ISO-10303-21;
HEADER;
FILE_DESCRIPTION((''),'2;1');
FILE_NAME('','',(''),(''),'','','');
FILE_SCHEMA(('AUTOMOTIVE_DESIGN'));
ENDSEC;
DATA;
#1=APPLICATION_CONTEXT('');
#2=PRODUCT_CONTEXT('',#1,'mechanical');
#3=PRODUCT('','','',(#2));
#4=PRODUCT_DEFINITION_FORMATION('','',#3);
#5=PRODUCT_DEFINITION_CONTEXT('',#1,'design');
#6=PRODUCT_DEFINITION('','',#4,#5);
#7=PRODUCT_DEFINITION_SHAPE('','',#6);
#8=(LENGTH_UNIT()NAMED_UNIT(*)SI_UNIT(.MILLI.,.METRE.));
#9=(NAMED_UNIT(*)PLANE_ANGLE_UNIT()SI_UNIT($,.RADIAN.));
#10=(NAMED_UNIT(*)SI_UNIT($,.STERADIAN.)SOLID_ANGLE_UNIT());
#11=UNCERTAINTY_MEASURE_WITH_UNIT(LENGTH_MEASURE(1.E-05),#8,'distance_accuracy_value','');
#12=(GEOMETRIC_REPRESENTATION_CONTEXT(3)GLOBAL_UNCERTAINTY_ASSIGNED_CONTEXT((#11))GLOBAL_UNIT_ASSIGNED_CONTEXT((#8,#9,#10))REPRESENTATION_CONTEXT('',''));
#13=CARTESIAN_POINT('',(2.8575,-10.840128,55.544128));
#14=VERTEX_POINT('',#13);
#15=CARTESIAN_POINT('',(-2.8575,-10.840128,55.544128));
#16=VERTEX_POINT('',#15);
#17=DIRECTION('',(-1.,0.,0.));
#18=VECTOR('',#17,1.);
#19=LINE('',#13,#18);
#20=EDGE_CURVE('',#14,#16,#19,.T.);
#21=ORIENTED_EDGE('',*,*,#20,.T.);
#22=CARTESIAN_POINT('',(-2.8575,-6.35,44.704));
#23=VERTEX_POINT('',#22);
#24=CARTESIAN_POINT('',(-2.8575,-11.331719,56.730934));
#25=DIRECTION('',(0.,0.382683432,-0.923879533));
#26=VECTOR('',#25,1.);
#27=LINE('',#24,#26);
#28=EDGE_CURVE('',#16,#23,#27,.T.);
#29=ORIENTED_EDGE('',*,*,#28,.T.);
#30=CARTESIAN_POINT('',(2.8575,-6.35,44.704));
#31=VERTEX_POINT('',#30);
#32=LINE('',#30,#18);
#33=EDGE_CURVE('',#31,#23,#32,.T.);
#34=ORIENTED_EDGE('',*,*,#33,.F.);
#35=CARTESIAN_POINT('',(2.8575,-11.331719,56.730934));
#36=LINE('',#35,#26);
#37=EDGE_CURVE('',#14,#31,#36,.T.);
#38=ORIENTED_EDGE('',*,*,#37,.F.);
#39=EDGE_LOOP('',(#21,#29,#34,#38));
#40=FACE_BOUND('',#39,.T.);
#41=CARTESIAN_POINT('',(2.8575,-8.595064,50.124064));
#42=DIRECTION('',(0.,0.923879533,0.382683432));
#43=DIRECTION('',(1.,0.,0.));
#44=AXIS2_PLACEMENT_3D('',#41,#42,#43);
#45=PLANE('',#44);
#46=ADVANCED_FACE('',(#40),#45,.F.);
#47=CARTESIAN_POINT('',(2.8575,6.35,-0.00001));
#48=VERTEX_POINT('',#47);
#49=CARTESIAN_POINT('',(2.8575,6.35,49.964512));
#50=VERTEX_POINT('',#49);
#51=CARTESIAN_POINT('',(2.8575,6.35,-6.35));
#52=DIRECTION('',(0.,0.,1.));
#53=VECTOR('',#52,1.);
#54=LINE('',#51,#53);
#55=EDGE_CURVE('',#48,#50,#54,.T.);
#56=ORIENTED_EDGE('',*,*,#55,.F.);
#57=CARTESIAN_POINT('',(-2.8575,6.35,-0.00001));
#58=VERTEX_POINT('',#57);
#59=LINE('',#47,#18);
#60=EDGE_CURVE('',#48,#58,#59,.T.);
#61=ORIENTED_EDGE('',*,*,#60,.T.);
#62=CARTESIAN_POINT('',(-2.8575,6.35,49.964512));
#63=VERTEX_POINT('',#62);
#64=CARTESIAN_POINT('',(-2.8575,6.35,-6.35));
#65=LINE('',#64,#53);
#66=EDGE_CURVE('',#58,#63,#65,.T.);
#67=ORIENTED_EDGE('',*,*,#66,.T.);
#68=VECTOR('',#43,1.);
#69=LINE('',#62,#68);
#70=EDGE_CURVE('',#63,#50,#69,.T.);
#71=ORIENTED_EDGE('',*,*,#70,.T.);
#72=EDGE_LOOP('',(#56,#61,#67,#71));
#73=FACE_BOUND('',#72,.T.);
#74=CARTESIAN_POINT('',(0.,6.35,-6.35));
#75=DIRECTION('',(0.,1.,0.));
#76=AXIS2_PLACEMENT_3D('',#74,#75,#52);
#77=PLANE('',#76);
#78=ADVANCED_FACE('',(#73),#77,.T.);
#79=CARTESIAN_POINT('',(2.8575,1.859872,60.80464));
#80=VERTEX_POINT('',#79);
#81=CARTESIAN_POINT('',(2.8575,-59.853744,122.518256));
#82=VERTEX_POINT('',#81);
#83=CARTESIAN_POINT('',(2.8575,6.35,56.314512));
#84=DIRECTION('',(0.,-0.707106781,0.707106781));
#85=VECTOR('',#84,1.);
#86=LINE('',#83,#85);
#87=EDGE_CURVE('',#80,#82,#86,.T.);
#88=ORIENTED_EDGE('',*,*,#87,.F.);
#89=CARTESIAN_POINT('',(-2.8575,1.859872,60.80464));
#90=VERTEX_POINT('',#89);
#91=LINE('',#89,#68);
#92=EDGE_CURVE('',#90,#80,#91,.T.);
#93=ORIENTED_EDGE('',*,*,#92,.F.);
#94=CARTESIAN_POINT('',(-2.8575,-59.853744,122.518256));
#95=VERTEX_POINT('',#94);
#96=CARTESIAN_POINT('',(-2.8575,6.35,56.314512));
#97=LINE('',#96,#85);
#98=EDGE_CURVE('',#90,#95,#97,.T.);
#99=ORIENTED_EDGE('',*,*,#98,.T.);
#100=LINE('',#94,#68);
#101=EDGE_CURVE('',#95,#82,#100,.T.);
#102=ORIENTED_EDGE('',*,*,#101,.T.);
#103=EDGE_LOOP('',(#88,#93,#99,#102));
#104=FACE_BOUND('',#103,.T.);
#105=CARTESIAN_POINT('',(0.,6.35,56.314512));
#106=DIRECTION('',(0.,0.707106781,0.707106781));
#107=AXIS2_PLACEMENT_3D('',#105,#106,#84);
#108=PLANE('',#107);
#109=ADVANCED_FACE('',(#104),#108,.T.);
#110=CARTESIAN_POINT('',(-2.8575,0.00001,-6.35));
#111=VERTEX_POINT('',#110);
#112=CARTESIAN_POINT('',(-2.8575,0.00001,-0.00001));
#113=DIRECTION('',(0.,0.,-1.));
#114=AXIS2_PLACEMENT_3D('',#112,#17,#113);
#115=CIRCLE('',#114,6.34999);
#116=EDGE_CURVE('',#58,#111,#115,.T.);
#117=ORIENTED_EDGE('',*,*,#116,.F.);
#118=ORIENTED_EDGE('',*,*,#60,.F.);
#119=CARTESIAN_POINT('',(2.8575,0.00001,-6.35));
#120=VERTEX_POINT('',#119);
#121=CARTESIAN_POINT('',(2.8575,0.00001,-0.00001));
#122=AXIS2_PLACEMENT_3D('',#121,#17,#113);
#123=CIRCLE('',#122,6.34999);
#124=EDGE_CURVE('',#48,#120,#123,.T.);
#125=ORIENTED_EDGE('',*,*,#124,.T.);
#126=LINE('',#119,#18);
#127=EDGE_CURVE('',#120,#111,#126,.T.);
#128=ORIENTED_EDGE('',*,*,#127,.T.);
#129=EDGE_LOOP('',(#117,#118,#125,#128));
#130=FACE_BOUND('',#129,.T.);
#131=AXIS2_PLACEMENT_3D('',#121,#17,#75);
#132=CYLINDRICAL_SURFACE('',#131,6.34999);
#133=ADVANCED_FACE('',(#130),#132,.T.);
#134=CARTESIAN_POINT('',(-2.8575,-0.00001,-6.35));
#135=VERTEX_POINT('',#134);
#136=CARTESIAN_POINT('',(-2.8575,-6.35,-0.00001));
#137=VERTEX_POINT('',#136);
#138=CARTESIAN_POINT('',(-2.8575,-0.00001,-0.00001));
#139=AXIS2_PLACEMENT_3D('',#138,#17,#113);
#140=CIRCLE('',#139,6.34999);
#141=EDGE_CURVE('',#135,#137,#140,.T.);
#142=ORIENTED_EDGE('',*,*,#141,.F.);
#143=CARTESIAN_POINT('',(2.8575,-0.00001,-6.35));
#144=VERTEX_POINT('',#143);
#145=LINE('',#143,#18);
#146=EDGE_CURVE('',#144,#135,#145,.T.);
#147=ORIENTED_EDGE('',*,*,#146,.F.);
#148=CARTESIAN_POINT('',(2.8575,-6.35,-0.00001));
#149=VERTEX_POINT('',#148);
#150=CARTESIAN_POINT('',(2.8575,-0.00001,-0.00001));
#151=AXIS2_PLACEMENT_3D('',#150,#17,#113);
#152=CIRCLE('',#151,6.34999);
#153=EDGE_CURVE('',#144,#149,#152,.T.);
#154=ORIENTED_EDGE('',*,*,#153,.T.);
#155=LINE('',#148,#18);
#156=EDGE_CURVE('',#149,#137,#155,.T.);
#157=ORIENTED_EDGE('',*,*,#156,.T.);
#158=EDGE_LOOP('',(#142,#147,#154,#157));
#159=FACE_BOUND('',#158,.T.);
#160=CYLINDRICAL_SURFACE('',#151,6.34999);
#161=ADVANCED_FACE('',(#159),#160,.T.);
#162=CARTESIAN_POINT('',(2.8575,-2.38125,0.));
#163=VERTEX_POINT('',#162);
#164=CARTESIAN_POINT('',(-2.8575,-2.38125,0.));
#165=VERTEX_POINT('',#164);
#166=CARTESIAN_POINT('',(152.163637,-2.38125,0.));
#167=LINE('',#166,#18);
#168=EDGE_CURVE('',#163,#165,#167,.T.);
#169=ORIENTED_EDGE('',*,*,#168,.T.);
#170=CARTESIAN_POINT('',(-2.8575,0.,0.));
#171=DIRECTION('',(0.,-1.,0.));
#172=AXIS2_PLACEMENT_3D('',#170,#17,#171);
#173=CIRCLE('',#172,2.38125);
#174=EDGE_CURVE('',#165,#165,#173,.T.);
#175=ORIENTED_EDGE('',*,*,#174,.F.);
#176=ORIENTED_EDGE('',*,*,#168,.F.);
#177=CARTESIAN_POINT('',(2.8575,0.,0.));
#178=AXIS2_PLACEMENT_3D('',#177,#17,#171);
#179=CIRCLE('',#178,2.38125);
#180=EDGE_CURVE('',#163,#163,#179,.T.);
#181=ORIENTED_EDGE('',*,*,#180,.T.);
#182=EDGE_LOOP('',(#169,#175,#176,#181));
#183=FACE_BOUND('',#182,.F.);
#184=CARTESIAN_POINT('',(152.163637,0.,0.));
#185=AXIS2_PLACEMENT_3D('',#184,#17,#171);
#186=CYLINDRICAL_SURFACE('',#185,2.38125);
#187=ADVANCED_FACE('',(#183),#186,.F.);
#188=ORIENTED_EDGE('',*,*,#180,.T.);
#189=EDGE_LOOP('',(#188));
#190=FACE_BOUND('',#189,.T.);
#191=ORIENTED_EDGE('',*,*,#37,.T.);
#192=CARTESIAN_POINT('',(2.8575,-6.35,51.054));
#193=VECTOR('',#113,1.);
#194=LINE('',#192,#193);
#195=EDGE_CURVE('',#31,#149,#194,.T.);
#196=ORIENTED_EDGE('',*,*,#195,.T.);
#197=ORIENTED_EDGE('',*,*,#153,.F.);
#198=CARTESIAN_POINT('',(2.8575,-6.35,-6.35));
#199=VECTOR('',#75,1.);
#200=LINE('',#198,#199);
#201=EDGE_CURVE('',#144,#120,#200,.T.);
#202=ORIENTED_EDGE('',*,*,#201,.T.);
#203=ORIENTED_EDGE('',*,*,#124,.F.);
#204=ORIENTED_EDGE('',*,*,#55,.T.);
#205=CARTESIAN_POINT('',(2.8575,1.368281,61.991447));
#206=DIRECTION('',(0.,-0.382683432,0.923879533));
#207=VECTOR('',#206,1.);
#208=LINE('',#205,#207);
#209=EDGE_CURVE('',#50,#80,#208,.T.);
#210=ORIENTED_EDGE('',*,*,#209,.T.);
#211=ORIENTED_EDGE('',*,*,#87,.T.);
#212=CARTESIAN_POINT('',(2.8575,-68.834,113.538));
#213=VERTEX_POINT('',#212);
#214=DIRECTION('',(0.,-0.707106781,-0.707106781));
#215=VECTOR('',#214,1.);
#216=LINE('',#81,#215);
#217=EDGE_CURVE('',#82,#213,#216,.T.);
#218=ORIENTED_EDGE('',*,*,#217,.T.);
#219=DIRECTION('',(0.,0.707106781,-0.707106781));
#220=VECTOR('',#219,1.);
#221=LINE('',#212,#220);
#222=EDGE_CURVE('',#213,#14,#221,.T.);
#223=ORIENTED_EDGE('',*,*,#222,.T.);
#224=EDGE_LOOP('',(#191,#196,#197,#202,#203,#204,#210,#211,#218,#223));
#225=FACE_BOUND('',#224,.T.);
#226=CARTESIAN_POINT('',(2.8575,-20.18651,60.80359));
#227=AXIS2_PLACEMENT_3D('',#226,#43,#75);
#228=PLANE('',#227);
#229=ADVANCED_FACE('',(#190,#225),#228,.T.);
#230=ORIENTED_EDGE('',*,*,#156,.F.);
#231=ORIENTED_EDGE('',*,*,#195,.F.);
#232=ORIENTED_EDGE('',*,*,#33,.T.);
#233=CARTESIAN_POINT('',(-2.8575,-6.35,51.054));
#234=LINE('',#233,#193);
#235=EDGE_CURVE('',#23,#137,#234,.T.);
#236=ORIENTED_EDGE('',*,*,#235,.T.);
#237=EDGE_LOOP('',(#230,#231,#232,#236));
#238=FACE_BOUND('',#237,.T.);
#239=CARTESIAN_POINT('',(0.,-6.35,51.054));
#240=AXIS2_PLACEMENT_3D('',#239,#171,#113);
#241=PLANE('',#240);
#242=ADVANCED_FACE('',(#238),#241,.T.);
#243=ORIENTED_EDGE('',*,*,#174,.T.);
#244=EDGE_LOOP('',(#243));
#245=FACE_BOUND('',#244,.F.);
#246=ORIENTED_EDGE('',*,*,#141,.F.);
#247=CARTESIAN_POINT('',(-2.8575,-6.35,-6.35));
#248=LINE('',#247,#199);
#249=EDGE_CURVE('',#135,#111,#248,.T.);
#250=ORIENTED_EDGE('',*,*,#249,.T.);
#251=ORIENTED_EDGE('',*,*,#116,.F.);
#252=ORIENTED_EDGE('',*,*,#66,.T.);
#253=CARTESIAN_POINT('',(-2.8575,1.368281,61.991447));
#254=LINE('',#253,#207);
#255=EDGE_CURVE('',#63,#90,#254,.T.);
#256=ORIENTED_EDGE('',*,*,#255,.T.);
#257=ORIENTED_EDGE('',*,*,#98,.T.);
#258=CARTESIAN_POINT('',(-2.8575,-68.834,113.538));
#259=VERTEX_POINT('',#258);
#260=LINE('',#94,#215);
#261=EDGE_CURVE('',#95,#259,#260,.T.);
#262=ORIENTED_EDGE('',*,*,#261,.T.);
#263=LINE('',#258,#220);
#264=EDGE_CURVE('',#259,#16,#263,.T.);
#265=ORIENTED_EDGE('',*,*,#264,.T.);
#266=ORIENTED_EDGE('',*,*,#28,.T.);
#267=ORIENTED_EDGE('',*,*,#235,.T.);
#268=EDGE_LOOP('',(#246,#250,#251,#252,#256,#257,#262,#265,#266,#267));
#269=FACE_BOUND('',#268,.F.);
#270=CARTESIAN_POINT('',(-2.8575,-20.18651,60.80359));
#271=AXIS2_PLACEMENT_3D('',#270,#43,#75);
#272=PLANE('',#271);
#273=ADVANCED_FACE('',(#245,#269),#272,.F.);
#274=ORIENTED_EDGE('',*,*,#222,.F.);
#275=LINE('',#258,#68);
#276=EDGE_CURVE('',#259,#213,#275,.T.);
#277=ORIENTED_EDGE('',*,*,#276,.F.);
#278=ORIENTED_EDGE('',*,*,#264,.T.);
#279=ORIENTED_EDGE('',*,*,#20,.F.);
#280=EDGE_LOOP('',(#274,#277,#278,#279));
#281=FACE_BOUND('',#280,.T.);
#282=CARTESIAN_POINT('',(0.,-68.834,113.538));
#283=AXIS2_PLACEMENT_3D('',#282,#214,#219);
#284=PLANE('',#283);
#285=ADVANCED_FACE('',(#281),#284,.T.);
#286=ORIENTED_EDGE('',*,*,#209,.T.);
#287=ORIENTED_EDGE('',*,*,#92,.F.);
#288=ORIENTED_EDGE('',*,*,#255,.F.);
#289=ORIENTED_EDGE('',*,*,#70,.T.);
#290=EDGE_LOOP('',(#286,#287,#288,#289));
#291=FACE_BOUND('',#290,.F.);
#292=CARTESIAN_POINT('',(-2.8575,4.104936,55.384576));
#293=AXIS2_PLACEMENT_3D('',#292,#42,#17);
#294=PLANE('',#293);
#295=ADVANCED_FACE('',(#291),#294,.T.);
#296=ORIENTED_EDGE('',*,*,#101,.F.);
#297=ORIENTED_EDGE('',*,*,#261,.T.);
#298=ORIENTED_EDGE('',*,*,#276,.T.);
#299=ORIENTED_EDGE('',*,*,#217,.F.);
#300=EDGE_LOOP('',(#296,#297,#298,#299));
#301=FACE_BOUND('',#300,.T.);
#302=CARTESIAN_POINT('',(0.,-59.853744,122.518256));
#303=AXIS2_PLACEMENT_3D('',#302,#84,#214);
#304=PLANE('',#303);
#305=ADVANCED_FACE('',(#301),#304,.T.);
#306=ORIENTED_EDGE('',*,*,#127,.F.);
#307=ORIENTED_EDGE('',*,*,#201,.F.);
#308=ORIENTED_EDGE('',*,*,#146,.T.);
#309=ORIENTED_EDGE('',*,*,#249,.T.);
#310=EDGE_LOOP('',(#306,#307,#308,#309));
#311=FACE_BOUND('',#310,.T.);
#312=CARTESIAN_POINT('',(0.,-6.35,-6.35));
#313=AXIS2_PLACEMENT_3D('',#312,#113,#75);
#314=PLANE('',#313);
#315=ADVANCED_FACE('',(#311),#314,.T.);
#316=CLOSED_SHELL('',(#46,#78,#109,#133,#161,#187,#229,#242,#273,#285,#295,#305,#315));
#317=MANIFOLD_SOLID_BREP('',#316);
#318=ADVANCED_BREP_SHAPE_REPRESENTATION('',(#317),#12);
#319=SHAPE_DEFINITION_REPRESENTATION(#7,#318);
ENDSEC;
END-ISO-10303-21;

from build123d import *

# Parameters (mm, degrees)
F1_DEPTH = 2.8575
F3_D     = 4.7625
F4_R     = 6.34999
F5_SIZE  = 6.35


# Not quite as in the source:
# - a fillet or chamfer is up to 0.001 mm smaller than in the source, because OpenCascade refuses the exact size


with BuildPart() as f1:
    # F0 (on Right) → F1 (new body, symmetric)
    with BuildSketch(Plane.YZ):
        Polygon((6.35, -6.35), (6.35, 56.3145122421), (-59.8537438789, 122.5182561211), (-68.834, 113.538), (-6.35, 51.054), (-6.35, -6.35), align=None)
    extrude(amount=F1_DEPTH, both=True)

    # F3 (through all)
    with Locations(Plane.YZ.offset(2.8575)):
        with Locations((0, 0)):
            Hole(F3_D / 2)

    # F4 (radius 6.35 in the source; OpenCascade refuses exactly that, so slightly less here)
    f4_edges = [f1.edges().sort_by_distance(p)[0] for p in [
        (0, -6.35, -6.35),
        (0, 6.35, -6.35),
    ]]
    fillet(f4_edges, radius=F4_R)

    # F5
    f5_edges = [f1.edges().sort_by_distance(p)[0] for p in [
        (0, -6.35, 51.054),
        (0, 6.35, 56.314512),
    ]]
    chamfer(f5_edges, length=F5_SIZE)


solid = f1.part
